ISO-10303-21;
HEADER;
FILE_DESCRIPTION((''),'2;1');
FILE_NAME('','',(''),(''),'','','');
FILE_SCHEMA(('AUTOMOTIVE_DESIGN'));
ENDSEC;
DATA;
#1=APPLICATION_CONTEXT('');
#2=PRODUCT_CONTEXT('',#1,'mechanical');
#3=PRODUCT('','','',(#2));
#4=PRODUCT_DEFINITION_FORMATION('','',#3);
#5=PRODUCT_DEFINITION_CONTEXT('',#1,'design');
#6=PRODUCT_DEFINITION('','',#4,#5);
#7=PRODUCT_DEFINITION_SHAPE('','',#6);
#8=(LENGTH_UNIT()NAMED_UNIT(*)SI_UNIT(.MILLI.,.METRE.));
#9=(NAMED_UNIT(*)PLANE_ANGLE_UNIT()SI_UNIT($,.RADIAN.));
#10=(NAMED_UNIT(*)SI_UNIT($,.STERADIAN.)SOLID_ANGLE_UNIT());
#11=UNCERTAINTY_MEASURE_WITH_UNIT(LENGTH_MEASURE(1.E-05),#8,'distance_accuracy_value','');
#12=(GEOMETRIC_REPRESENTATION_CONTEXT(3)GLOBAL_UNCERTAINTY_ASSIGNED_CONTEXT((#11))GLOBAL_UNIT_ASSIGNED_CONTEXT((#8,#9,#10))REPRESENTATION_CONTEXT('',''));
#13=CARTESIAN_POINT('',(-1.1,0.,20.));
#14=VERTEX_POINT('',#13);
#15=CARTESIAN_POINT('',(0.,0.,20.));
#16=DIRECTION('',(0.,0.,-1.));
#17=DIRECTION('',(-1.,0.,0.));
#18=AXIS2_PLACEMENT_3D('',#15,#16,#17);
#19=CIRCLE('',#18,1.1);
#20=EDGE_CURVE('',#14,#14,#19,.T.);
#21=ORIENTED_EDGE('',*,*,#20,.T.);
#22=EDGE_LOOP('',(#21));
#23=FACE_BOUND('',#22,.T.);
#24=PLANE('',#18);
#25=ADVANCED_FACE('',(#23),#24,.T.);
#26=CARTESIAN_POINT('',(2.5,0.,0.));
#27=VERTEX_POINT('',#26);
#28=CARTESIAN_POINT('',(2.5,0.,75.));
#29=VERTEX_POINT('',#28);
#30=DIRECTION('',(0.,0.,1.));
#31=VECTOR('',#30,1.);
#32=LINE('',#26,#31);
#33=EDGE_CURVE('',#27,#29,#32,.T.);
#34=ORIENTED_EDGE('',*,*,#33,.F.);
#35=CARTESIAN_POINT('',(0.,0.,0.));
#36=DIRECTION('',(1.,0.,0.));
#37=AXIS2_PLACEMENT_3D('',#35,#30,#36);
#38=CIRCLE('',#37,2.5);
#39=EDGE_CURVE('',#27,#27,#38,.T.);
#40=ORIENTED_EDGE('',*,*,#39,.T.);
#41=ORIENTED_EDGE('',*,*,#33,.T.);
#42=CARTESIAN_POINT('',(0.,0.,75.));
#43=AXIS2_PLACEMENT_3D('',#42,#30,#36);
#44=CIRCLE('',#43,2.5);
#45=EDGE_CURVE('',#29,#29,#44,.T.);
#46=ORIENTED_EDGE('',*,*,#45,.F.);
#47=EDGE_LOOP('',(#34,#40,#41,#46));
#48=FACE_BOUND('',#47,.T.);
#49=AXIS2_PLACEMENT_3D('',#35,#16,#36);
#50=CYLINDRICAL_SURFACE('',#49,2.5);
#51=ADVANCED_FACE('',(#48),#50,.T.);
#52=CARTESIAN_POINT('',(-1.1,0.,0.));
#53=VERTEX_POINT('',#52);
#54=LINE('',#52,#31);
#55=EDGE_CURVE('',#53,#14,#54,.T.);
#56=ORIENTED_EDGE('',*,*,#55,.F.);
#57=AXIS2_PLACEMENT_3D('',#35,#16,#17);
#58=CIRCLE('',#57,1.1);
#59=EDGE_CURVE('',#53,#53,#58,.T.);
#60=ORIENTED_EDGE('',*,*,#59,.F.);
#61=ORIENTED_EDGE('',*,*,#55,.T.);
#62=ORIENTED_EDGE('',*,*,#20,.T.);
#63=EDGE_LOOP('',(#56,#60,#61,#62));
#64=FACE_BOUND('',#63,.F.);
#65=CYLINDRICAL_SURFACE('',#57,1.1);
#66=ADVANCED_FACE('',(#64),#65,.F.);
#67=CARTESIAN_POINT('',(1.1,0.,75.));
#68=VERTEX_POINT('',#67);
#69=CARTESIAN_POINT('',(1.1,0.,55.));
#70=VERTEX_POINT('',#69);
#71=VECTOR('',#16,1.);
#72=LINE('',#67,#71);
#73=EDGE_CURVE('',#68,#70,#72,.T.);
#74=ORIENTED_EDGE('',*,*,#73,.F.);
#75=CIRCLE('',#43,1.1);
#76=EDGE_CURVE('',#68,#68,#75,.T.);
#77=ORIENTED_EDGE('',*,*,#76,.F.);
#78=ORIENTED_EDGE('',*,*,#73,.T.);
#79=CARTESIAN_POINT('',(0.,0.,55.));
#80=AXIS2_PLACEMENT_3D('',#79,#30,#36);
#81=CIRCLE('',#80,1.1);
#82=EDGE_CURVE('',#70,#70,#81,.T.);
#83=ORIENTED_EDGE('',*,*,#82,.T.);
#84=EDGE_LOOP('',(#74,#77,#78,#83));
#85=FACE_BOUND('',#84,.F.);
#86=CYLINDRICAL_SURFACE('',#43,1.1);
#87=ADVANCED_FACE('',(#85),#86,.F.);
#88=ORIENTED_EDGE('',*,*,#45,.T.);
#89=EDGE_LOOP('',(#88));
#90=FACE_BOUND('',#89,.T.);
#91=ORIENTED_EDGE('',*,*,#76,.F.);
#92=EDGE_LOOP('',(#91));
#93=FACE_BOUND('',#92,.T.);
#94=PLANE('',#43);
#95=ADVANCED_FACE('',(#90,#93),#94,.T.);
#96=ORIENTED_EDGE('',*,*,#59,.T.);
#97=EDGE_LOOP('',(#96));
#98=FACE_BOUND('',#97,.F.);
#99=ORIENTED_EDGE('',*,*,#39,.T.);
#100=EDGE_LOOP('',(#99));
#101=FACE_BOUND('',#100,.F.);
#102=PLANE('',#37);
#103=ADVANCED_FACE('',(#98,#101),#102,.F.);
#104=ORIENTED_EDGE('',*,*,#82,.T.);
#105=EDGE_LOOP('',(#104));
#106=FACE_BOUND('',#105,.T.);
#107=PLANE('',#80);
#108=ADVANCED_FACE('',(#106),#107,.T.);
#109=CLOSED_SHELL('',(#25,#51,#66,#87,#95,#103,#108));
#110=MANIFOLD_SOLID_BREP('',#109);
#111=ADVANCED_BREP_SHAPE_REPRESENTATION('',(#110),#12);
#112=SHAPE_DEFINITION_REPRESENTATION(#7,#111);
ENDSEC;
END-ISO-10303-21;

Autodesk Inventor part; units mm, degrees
ref_plane "YZ Plane" through (0, 0, 0) normal (1, 0, 0) x (0, 1, 0)
ref_plane "XZ Plane" through (0, 0, 0) normal (0, 1, 0) x (-1, 0, 0)
ref_plane "XY Plane" through (0, 0, 0) normal (0, 0, 1) x (1, 0, 0)
sketch "Sketch1" plane through (0, 0, 0) normal (0, 0, 1) x (1, 0, 0)
  circle A0 centre (0, 0) radius 2.5
  dimension "d0" = 5
extrude "Extrusion1" add sketch "Sketch1" along normal blind 75
sketch "Sketch2" plane through (0, 0, 75) normal (0, 0, 1) x (1, 0, 0)
  circle A0 centre (0, 0) radius 1.1
  dimension "d3" = 2.2
extrude "Extrusion2" cut sketch "Sketch2" against normal blind 20
sketch "Sketch3" plane through (0, 0, 0) normal (0, 0, -1) x (-1, 0, 0)
  circle A0 centre (0, 0) radius 1.1 projected
extrude "Extrusion3" cut sketch "Sketch3" against normal blind 20
thread "Thread1" size "M2.5x0.45" class "6H" standard "ANSI Metric M Profile" length 16
thread "Thread2" size "M2.5x0.45" class "6H" standard "ANSI Metric M Profile" length 16
properties part number "AxisLinear"
